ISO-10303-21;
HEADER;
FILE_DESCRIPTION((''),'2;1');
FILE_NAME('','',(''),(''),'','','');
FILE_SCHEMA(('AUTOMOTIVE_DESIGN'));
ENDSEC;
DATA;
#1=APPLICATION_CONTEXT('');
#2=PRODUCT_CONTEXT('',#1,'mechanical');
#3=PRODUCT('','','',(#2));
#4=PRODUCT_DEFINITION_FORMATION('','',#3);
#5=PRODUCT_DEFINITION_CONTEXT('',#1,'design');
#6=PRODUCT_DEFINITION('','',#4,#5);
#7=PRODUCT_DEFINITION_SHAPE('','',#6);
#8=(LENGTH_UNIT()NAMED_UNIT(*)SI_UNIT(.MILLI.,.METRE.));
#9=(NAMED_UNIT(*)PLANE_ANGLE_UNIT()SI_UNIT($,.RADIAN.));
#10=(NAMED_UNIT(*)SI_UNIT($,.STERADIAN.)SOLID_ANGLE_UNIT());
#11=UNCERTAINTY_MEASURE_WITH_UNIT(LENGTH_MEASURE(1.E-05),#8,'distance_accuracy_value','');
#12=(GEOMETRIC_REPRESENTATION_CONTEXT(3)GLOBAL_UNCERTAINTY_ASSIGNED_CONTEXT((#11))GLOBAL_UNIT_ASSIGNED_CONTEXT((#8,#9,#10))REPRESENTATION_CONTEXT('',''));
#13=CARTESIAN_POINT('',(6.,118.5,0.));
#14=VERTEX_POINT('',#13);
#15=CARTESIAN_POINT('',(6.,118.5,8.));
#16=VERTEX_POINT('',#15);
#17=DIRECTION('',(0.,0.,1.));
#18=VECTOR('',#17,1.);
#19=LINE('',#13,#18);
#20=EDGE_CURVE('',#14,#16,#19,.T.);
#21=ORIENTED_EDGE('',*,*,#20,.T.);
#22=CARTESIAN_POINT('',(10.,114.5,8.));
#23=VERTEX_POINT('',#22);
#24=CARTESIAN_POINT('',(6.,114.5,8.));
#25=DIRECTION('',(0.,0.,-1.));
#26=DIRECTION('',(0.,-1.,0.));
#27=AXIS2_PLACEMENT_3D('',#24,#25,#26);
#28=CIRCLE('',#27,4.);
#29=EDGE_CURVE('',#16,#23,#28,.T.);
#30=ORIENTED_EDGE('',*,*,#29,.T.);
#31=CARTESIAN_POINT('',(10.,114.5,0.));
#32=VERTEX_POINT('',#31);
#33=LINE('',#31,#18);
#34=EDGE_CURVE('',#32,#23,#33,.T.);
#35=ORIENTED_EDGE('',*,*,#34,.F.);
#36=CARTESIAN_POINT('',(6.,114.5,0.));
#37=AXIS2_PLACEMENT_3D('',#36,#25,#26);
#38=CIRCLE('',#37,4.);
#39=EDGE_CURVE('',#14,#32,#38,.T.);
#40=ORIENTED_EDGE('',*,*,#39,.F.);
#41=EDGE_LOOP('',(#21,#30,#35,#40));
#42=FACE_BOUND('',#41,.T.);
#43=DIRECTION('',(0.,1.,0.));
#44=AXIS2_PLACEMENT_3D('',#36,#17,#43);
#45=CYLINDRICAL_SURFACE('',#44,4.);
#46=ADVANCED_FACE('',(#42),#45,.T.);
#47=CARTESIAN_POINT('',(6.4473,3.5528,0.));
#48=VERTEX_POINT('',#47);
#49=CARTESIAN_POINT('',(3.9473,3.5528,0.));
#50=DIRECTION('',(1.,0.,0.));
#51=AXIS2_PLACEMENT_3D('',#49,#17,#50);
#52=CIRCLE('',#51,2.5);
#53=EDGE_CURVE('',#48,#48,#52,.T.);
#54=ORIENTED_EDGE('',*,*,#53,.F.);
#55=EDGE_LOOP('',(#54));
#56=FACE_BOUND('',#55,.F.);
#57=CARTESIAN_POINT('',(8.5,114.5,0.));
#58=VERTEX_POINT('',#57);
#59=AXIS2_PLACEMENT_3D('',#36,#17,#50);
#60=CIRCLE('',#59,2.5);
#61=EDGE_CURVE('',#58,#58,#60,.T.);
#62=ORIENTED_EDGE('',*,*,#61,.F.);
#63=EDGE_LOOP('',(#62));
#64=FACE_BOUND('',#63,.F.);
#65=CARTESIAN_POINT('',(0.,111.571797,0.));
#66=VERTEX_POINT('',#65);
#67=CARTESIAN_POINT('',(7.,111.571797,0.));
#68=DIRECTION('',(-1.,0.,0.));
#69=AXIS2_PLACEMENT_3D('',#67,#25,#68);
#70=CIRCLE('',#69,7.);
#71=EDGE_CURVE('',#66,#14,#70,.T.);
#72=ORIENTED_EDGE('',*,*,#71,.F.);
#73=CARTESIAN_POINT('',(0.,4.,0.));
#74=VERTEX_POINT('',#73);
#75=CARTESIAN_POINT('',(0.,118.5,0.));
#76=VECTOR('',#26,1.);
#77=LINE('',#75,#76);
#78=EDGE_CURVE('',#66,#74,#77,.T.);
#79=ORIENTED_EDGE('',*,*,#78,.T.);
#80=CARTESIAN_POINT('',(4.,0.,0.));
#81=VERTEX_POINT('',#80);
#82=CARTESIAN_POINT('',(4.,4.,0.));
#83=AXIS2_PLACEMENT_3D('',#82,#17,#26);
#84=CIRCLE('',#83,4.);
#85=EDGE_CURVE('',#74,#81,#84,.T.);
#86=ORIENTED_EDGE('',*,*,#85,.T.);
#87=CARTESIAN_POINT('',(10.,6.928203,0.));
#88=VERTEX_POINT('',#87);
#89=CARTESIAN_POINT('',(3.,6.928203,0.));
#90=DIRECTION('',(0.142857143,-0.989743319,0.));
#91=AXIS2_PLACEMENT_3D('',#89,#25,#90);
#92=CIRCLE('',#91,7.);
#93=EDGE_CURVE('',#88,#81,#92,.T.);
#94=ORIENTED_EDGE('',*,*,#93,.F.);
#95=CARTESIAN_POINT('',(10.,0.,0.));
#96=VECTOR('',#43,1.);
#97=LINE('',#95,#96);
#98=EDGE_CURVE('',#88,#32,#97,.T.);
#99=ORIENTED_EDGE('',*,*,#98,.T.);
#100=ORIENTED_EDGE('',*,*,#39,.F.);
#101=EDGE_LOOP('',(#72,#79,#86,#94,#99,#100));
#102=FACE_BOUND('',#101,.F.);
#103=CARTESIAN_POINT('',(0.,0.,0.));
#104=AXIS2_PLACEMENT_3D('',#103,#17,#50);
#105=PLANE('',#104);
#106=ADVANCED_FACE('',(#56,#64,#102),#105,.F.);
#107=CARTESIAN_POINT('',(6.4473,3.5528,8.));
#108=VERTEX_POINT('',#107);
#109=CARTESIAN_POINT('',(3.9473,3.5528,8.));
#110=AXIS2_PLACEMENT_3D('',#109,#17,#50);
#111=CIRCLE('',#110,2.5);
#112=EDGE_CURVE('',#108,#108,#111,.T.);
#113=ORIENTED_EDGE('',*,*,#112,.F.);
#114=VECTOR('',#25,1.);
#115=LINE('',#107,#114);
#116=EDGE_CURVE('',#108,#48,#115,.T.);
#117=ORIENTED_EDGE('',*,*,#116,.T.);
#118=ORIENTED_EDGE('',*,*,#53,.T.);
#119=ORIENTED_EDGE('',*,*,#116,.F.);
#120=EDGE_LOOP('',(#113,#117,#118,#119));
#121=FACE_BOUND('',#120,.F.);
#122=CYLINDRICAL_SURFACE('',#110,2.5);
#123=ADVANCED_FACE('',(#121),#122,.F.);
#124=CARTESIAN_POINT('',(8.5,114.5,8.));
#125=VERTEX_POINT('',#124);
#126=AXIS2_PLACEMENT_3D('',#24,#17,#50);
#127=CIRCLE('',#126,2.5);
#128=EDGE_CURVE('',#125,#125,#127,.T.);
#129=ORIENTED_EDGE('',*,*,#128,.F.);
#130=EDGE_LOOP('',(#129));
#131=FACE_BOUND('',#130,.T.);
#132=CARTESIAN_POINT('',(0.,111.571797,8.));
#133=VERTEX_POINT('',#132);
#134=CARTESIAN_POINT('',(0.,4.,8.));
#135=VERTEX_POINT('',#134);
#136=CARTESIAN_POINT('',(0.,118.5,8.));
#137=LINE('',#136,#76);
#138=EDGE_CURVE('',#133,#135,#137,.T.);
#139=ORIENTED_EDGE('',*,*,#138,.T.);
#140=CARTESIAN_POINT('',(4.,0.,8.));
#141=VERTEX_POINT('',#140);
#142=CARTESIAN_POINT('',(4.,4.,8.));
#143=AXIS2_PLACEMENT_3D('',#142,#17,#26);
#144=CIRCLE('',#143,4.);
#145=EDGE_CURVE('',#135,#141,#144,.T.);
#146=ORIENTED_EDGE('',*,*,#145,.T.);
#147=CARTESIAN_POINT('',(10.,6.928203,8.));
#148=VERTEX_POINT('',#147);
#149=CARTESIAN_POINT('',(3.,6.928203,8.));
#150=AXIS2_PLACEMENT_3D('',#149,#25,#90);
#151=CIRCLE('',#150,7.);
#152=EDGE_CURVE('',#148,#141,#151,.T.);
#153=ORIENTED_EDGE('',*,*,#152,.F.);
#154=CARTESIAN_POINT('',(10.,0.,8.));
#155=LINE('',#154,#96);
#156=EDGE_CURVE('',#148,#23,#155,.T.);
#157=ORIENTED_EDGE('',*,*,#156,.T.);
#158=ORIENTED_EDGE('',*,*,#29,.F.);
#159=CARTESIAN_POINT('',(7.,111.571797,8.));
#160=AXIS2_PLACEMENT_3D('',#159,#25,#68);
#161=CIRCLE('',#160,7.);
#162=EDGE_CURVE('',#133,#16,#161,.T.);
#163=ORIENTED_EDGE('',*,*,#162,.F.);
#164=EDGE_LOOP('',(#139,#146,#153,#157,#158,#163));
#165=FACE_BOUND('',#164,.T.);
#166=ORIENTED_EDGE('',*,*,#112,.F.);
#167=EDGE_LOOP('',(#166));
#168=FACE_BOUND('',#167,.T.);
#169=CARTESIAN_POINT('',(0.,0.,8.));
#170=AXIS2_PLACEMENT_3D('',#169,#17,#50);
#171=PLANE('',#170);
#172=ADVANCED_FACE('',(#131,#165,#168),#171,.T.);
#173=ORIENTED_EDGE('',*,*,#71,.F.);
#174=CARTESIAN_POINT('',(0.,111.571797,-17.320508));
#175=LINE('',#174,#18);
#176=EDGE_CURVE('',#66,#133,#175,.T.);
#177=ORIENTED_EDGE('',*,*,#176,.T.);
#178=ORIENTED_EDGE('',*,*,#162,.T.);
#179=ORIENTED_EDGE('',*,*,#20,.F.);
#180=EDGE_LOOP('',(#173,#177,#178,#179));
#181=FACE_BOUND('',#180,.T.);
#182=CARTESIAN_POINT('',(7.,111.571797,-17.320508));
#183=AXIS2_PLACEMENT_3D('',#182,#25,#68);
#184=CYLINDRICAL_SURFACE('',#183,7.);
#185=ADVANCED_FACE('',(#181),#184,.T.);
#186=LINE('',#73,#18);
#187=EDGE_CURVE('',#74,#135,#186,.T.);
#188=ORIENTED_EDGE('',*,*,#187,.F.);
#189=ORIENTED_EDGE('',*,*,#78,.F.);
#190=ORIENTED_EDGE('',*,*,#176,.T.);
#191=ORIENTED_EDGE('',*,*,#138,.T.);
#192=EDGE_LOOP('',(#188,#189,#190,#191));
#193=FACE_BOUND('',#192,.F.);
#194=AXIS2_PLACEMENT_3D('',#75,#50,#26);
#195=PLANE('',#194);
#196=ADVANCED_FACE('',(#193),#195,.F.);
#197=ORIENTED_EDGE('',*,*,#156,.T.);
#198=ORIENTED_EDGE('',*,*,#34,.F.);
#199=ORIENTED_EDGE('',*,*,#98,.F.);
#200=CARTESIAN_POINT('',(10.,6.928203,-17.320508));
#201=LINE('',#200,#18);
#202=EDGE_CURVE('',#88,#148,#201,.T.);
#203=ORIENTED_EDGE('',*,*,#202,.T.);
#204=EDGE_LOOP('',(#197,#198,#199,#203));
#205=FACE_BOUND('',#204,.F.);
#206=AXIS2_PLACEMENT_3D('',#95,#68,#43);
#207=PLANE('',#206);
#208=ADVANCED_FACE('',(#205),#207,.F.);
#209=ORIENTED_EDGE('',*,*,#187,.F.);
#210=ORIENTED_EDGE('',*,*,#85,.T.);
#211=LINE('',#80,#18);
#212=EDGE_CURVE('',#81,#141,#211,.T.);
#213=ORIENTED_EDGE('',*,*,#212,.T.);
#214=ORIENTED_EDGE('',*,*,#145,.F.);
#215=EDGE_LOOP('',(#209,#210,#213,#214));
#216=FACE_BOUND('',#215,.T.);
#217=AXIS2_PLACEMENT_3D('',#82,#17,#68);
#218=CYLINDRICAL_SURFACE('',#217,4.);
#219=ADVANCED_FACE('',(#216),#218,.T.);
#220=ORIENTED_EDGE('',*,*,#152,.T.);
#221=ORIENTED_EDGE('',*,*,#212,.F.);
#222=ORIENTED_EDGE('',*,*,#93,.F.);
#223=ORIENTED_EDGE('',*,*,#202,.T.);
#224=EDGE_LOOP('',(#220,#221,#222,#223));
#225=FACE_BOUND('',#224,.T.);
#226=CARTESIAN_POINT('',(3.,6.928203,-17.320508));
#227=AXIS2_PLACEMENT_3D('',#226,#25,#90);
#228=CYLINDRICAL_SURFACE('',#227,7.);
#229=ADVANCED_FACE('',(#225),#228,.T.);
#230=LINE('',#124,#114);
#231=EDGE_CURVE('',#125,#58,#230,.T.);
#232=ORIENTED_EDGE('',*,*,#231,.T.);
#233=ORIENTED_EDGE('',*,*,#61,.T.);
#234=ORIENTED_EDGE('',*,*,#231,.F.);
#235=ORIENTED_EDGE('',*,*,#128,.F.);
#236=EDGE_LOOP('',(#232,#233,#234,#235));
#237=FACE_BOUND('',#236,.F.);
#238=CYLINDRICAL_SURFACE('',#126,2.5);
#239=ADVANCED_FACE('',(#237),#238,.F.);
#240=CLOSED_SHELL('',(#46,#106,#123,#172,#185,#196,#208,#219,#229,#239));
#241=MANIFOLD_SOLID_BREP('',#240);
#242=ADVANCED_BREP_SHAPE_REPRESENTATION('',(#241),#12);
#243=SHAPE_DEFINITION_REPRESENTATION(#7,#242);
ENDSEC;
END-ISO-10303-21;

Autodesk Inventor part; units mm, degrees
ref_plane "YZ Plane" through (0, 0, 0) normal (1, 0, 0) x (0, 1, 0)
ref_plane "XZ Plane" through (0, 0, 0) normal (0, 1, 0) x (-1, 0, 0)
ref_plane "XY Plane" through (0, 0, 0) normal (0, 0, 1) x (1, 0, 0)
sketch "Sketch1" plane through (0, 0, 0) normal (0, 0, 1) x (1, 0, 0)
  line L0 (0, 0) -> (10, 0)
  line L1 (10, 0) -> (10, 118.5)
  line L2 (10, 118.5) -> (0, 118.5)
  line L3 (0, 118.5) -> (0, 0)
  dimension "d1" = 10
  dimension "d14" = 118.5
extrude "Extrusion1" add sketch "Sketch1" along normal blind 8
sketch "Sketch2" plane through (0, 0, 8) normal (0, 0, 1) x (1, 0, 0)
  circle A0 centre (3.9473, 3.5528) radius 2.5
  circle A1 centre (6.4473, 196.4185) radius 2.5
  point P0 (0, 0)
  dimension "d4" = 5
  dimension "d5" = 5
extrude "Extrusion2" cut sketch "Sketch2" against normal through all
sketch "Sketch3" plane through (0, 0, 8) normal (0, 0, 1) x (1, 0, 0)
  circle A0 centre (6, 114.5) radius 2.5
  line L0 (10, 118.5) -> (0, 118.5) projected
  line L1 (10, 0) -> (10, 118.5) projected
  point P0 (0, 0)
  dimension "d8" = 5
  dimension "d9" = 4
  dimension "d10" = 4
extrude "Extrusion3" cut sketch "Sketch3" against normal through all
fillet "Fillet3" radius 4 2 edges at (10, 118.5, 4) (0, 0, 4)
fillet "Fillet4" radius 7 2 edges at (10, 0, 4) (0, 118.5, 4)
properties part number "rod"
